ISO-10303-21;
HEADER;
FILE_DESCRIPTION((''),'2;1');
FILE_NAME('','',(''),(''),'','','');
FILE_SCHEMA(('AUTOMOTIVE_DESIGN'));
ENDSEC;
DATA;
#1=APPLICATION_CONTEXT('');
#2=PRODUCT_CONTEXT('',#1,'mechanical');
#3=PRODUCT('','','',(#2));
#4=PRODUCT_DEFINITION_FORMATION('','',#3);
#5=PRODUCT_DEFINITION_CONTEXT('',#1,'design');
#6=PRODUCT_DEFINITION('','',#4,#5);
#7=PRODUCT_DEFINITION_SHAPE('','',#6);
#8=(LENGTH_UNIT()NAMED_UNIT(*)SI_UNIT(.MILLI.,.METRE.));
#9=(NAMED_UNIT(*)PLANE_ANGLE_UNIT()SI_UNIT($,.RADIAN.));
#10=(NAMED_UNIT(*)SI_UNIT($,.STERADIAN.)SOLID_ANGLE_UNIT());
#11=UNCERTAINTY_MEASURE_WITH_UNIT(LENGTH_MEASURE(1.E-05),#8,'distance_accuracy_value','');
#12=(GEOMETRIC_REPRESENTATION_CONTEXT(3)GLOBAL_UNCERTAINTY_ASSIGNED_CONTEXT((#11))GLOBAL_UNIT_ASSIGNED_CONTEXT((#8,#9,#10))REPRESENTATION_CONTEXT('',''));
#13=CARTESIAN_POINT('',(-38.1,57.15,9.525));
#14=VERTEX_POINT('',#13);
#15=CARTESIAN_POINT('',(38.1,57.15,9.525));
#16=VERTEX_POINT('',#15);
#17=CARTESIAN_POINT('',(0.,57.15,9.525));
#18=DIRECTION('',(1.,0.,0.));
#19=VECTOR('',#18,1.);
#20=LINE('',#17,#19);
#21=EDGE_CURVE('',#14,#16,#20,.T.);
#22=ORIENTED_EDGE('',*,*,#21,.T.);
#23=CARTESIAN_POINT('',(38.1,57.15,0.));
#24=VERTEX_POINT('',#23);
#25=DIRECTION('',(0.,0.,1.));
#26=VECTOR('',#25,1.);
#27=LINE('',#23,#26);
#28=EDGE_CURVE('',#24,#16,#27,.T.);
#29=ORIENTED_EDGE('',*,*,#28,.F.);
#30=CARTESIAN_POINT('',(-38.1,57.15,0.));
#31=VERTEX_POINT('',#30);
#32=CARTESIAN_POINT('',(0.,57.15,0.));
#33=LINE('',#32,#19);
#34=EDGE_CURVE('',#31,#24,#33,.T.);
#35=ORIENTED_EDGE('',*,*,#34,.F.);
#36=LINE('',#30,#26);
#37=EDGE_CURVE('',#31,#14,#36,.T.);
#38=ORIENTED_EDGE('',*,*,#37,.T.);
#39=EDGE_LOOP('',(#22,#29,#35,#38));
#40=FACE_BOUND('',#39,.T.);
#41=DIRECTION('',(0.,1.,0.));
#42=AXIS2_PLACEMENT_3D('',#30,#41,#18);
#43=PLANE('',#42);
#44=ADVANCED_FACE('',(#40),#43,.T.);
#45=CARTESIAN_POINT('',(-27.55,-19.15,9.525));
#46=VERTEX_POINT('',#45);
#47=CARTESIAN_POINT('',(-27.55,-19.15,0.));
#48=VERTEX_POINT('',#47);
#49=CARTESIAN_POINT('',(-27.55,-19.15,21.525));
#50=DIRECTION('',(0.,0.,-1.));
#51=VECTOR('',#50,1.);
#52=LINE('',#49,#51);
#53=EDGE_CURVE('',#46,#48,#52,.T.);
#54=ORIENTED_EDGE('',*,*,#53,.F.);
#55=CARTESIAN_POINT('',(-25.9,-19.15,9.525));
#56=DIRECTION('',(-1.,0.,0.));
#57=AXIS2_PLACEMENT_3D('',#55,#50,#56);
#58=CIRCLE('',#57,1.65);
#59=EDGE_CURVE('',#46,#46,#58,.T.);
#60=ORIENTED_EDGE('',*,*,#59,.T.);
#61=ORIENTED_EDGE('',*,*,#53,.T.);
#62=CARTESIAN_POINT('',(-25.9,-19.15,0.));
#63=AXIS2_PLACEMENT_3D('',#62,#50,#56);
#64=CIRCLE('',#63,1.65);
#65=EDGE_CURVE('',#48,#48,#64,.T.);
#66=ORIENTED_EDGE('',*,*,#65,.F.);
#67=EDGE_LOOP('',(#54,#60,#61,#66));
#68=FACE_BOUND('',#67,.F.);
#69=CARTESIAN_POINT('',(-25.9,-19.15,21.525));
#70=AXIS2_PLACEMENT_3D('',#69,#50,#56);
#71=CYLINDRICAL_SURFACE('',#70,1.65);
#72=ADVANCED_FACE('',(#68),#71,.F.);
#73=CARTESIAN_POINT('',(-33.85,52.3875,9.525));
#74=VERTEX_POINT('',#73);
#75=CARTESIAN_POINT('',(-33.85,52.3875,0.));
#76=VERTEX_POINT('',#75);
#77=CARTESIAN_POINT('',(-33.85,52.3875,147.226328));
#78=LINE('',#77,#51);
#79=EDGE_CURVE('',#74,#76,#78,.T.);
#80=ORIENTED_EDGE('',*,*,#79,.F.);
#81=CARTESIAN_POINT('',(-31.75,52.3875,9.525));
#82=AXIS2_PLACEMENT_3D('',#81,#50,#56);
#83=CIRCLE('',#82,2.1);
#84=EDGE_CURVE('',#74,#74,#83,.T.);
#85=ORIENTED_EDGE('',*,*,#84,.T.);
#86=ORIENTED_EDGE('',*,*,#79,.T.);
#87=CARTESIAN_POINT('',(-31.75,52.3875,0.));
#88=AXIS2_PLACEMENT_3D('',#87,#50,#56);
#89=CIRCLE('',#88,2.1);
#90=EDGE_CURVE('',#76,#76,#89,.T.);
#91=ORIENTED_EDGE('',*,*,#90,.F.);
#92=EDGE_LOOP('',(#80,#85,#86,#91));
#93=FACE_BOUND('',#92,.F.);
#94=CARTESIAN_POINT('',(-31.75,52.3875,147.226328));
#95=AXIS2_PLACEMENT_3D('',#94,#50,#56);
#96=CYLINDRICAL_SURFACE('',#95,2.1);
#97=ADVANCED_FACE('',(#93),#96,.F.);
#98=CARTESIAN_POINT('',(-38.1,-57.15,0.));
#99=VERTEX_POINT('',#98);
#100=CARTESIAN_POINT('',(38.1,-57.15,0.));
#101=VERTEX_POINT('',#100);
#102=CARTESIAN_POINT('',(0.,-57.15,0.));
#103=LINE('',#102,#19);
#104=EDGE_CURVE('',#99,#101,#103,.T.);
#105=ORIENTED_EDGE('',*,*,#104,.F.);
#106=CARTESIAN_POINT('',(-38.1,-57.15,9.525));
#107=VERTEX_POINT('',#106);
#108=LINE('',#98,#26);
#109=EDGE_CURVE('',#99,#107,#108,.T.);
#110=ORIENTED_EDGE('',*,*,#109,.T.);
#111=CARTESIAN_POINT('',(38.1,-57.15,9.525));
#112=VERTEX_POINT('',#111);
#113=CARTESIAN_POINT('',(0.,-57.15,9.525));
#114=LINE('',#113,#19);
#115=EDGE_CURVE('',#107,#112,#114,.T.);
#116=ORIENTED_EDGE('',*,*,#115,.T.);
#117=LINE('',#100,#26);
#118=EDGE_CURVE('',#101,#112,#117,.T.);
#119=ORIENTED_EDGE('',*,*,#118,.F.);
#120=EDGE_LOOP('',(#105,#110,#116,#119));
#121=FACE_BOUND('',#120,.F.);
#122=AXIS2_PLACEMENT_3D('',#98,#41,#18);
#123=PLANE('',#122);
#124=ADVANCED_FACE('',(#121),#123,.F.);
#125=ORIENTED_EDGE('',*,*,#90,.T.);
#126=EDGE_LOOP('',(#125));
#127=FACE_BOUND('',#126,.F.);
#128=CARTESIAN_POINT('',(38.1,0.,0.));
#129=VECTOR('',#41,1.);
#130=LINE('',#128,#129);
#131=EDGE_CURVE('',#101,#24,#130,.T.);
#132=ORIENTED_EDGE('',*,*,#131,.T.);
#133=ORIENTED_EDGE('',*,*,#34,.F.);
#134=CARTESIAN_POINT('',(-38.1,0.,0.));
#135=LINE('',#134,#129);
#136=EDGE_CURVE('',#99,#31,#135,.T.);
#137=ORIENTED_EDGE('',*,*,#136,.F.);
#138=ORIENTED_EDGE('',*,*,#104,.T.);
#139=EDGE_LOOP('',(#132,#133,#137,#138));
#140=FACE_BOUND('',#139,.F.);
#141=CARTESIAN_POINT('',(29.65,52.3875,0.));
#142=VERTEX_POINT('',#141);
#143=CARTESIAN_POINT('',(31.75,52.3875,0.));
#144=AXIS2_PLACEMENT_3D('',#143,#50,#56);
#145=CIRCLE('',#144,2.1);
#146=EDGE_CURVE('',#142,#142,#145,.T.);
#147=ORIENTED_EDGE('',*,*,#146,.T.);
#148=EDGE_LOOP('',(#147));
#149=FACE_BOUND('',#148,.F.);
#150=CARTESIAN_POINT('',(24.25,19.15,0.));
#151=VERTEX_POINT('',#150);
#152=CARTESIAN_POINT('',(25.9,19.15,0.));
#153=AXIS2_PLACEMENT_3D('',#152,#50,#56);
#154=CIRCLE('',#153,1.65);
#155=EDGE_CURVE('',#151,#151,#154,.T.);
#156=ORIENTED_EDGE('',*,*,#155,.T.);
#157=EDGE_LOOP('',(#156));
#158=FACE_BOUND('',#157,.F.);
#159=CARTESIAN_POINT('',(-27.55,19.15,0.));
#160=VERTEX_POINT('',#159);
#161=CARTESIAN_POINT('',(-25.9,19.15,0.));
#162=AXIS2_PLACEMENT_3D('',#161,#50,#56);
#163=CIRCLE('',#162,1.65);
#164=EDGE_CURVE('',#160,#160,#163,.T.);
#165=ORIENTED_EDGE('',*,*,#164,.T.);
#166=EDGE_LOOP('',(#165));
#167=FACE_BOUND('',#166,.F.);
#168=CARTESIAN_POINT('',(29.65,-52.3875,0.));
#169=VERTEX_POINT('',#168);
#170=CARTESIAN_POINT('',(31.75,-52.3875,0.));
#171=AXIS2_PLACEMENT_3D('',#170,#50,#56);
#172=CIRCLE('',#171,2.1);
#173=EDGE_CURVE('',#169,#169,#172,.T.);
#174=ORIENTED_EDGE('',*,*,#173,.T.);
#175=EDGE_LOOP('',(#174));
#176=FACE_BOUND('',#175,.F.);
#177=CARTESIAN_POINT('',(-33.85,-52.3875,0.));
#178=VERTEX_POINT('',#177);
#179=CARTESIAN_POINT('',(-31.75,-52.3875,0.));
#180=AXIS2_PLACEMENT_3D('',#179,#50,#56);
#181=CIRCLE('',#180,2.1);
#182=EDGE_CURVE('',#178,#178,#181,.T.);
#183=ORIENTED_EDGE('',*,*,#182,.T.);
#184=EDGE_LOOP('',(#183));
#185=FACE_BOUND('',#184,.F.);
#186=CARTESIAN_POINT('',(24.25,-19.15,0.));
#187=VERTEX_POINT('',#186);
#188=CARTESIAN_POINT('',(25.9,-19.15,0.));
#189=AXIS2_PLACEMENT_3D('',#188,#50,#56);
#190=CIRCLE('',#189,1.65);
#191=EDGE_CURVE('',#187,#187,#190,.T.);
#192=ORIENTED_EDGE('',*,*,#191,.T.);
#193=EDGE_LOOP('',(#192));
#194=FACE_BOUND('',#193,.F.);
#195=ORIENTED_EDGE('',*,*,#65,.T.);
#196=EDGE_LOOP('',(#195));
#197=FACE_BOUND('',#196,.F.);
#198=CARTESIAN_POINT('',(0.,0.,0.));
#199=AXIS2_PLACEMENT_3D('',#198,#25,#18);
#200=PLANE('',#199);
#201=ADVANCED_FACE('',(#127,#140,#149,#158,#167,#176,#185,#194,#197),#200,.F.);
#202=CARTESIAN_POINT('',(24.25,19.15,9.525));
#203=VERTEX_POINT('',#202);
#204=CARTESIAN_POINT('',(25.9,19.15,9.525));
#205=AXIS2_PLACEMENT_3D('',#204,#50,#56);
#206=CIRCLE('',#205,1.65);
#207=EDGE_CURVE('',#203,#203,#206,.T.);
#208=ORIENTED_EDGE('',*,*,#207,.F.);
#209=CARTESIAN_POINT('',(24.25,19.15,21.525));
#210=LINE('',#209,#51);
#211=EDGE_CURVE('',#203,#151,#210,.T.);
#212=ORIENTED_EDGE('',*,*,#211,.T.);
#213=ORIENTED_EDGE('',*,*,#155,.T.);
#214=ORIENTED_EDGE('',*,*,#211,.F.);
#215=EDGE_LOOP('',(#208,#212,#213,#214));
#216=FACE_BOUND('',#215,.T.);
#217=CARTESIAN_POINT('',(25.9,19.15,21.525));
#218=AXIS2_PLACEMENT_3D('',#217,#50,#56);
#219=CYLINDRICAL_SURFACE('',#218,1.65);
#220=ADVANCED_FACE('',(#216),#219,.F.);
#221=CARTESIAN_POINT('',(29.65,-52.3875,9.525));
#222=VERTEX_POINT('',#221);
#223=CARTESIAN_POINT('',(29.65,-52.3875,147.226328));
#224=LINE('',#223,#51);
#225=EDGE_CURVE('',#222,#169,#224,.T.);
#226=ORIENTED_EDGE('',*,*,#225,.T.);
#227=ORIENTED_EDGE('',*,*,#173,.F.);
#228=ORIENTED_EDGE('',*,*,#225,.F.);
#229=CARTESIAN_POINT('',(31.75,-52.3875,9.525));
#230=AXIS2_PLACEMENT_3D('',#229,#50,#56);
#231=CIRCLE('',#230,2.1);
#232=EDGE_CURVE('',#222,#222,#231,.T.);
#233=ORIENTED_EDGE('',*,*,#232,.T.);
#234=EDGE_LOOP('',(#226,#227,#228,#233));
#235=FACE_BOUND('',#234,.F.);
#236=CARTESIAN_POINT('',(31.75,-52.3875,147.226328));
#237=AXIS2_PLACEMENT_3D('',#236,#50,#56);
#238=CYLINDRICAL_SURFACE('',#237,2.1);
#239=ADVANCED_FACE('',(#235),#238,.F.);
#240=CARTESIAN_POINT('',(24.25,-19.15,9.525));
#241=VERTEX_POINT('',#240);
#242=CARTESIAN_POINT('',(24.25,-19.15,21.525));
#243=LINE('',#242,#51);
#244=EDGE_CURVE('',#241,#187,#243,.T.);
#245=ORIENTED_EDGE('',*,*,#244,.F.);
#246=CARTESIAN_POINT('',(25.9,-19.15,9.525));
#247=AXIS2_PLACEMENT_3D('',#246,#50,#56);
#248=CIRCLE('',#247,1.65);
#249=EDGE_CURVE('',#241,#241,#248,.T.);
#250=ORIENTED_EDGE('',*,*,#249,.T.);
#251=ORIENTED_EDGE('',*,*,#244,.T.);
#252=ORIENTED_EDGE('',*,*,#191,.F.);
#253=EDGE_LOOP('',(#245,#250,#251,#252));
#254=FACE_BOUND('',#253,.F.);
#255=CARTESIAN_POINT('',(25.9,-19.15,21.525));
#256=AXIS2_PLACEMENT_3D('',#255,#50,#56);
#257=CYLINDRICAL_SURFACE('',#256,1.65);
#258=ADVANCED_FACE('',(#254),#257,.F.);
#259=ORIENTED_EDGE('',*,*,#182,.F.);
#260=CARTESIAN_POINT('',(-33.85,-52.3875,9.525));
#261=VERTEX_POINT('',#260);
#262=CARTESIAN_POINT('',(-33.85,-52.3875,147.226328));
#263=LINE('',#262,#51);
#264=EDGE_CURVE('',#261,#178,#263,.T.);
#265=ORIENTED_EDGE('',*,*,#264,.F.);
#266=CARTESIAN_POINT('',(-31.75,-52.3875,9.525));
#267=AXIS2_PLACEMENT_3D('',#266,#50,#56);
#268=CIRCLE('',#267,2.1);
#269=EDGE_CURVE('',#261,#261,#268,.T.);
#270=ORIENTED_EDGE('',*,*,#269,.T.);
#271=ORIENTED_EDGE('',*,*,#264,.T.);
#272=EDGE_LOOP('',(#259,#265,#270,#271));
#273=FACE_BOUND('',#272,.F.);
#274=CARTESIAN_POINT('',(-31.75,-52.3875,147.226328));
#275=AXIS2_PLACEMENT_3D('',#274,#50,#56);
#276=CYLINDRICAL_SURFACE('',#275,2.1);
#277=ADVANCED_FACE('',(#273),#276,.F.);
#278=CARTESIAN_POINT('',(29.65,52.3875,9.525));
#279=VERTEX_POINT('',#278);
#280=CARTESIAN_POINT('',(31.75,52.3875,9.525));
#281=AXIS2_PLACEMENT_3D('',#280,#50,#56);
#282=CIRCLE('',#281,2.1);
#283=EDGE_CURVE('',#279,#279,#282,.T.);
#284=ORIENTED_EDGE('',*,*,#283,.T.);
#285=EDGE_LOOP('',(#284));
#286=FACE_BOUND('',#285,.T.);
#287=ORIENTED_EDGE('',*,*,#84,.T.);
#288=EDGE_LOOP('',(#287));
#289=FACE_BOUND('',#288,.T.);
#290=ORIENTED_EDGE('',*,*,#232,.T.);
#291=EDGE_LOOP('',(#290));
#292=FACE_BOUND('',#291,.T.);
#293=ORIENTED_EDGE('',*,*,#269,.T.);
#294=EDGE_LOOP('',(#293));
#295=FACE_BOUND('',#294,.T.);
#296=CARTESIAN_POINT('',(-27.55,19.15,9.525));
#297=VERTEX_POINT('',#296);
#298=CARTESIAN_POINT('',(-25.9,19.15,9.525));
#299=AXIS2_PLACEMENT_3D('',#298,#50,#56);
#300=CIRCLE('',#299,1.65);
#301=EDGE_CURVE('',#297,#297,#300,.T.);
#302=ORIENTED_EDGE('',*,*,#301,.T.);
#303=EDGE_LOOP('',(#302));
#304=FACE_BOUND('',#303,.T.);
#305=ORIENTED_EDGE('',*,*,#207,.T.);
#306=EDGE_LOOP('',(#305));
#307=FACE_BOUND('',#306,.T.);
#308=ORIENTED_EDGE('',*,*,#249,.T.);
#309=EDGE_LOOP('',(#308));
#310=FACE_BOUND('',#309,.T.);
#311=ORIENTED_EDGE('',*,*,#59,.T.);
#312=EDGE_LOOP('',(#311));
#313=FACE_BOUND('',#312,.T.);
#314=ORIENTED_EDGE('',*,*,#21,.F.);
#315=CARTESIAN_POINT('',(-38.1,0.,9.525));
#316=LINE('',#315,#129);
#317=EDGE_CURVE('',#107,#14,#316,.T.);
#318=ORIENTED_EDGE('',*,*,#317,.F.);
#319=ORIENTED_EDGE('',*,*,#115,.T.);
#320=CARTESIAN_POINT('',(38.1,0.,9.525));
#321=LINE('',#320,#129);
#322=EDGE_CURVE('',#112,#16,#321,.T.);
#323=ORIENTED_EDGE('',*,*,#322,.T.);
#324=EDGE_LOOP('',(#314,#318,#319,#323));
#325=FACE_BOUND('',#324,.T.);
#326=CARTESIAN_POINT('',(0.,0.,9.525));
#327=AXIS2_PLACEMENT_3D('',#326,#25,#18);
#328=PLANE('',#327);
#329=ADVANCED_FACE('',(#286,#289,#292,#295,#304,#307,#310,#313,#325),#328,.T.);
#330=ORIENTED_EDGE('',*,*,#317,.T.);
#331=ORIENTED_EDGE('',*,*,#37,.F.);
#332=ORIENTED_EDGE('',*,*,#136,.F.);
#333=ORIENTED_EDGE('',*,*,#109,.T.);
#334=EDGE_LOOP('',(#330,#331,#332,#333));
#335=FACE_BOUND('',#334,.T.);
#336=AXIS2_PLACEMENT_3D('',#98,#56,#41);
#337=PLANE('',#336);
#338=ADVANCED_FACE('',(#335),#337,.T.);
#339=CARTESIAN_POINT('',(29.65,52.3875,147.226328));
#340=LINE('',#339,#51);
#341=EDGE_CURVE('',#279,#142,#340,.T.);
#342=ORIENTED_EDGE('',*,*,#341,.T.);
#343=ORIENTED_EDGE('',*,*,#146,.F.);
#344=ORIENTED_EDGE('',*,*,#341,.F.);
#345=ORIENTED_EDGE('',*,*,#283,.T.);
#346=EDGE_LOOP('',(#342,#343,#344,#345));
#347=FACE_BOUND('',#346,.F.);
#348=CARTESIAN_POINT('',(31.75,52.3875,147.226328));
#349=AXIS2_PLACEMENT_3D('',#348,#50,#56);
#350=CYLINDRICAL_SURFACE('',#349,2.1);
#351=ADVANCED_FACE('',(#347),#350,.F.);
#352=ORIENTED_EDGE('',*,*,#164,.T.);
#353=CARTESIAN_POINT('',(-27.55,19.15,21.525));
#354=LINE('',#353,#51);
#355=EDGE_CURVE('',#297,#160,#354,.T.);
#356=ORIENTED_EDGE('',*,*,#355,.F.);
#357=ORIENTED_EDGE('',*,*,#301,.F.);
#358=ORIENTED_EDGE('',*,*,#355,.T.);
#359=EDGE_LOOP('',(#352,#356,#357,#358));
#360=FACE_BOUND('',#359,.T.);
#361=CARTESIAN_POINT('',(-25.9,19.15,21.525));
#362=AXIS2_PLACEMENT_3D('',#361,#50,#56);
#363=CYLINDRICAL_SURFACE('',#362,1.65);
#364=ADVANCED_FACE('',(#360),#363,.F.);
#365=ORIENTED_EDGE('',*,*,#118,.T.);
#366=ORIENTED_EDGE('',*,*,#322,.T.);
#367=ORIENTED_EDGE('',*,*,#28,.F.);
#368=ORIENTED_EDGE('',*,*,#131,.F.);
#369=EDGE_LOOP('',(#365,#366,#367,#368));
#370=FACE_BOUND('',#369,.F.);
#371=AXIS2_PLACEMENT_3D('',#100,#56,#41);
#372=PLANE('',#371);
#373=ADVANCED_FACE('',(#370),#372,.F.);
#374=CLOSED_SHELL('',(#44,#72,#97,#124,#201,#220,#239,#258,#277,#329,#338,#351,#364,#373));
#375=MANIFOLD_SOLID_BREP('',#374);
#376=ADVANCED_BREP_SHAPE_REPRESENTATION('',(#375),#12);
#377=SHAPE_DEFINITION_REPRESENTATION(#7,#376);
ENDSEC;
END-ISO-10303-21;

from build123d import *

# Parameters (mm, degrees)
F0_W     = 76.2
F0_H     = 114.3
F1_DEPTH = 9.525
F3_D     = 4.2
F6_D     = 3.3
F6_DEPTH = 12
F6_TIP   = 0.9914200214


# Not quite as in the source:
# - a pattern or mirror of a feature is missing from the dataset's text; its kind, count and spacing are read off the source's solid
# - a feature names something its author has since deleted; it is built from what else it names


with BuildPart() as f1:
    # F0 (on Top) → F1 (new body)
    with BuildSketch(Plane.XY):
        Rectangle(F0_W, F0_H)
    extrude(amount=F1_DEPTH)

    # F3 (through all)
    with Locations(Plane.XY.offset(9.525)):
        with Locations((-31.75, 52.3875), (31.75, 52.3875), (31.75, -52.3875), (-31.75, -52.3875)):
            Hole(F3_D / 2)

    # F6
    with Locations(Plane.XY.offset(9.525)):
        with Locations((-25.9, -19.15), (25.9, -19.15)):
            f6 = Hole(F6_D / 2, depth=F6_DEPTH)
            with Locations((0, 0, -(F6_DEPTH + F6_TIP / 2))):  # 118° drill point
                Cone(0, F6_D / 2, F6_TIP, mode=Mode.SUBTRACT)

    # F6_copies: F6 across plane
    add(f6.mirror(Plane.ZX), mode=Mode.SUBTRACT)


solid = f1.part
